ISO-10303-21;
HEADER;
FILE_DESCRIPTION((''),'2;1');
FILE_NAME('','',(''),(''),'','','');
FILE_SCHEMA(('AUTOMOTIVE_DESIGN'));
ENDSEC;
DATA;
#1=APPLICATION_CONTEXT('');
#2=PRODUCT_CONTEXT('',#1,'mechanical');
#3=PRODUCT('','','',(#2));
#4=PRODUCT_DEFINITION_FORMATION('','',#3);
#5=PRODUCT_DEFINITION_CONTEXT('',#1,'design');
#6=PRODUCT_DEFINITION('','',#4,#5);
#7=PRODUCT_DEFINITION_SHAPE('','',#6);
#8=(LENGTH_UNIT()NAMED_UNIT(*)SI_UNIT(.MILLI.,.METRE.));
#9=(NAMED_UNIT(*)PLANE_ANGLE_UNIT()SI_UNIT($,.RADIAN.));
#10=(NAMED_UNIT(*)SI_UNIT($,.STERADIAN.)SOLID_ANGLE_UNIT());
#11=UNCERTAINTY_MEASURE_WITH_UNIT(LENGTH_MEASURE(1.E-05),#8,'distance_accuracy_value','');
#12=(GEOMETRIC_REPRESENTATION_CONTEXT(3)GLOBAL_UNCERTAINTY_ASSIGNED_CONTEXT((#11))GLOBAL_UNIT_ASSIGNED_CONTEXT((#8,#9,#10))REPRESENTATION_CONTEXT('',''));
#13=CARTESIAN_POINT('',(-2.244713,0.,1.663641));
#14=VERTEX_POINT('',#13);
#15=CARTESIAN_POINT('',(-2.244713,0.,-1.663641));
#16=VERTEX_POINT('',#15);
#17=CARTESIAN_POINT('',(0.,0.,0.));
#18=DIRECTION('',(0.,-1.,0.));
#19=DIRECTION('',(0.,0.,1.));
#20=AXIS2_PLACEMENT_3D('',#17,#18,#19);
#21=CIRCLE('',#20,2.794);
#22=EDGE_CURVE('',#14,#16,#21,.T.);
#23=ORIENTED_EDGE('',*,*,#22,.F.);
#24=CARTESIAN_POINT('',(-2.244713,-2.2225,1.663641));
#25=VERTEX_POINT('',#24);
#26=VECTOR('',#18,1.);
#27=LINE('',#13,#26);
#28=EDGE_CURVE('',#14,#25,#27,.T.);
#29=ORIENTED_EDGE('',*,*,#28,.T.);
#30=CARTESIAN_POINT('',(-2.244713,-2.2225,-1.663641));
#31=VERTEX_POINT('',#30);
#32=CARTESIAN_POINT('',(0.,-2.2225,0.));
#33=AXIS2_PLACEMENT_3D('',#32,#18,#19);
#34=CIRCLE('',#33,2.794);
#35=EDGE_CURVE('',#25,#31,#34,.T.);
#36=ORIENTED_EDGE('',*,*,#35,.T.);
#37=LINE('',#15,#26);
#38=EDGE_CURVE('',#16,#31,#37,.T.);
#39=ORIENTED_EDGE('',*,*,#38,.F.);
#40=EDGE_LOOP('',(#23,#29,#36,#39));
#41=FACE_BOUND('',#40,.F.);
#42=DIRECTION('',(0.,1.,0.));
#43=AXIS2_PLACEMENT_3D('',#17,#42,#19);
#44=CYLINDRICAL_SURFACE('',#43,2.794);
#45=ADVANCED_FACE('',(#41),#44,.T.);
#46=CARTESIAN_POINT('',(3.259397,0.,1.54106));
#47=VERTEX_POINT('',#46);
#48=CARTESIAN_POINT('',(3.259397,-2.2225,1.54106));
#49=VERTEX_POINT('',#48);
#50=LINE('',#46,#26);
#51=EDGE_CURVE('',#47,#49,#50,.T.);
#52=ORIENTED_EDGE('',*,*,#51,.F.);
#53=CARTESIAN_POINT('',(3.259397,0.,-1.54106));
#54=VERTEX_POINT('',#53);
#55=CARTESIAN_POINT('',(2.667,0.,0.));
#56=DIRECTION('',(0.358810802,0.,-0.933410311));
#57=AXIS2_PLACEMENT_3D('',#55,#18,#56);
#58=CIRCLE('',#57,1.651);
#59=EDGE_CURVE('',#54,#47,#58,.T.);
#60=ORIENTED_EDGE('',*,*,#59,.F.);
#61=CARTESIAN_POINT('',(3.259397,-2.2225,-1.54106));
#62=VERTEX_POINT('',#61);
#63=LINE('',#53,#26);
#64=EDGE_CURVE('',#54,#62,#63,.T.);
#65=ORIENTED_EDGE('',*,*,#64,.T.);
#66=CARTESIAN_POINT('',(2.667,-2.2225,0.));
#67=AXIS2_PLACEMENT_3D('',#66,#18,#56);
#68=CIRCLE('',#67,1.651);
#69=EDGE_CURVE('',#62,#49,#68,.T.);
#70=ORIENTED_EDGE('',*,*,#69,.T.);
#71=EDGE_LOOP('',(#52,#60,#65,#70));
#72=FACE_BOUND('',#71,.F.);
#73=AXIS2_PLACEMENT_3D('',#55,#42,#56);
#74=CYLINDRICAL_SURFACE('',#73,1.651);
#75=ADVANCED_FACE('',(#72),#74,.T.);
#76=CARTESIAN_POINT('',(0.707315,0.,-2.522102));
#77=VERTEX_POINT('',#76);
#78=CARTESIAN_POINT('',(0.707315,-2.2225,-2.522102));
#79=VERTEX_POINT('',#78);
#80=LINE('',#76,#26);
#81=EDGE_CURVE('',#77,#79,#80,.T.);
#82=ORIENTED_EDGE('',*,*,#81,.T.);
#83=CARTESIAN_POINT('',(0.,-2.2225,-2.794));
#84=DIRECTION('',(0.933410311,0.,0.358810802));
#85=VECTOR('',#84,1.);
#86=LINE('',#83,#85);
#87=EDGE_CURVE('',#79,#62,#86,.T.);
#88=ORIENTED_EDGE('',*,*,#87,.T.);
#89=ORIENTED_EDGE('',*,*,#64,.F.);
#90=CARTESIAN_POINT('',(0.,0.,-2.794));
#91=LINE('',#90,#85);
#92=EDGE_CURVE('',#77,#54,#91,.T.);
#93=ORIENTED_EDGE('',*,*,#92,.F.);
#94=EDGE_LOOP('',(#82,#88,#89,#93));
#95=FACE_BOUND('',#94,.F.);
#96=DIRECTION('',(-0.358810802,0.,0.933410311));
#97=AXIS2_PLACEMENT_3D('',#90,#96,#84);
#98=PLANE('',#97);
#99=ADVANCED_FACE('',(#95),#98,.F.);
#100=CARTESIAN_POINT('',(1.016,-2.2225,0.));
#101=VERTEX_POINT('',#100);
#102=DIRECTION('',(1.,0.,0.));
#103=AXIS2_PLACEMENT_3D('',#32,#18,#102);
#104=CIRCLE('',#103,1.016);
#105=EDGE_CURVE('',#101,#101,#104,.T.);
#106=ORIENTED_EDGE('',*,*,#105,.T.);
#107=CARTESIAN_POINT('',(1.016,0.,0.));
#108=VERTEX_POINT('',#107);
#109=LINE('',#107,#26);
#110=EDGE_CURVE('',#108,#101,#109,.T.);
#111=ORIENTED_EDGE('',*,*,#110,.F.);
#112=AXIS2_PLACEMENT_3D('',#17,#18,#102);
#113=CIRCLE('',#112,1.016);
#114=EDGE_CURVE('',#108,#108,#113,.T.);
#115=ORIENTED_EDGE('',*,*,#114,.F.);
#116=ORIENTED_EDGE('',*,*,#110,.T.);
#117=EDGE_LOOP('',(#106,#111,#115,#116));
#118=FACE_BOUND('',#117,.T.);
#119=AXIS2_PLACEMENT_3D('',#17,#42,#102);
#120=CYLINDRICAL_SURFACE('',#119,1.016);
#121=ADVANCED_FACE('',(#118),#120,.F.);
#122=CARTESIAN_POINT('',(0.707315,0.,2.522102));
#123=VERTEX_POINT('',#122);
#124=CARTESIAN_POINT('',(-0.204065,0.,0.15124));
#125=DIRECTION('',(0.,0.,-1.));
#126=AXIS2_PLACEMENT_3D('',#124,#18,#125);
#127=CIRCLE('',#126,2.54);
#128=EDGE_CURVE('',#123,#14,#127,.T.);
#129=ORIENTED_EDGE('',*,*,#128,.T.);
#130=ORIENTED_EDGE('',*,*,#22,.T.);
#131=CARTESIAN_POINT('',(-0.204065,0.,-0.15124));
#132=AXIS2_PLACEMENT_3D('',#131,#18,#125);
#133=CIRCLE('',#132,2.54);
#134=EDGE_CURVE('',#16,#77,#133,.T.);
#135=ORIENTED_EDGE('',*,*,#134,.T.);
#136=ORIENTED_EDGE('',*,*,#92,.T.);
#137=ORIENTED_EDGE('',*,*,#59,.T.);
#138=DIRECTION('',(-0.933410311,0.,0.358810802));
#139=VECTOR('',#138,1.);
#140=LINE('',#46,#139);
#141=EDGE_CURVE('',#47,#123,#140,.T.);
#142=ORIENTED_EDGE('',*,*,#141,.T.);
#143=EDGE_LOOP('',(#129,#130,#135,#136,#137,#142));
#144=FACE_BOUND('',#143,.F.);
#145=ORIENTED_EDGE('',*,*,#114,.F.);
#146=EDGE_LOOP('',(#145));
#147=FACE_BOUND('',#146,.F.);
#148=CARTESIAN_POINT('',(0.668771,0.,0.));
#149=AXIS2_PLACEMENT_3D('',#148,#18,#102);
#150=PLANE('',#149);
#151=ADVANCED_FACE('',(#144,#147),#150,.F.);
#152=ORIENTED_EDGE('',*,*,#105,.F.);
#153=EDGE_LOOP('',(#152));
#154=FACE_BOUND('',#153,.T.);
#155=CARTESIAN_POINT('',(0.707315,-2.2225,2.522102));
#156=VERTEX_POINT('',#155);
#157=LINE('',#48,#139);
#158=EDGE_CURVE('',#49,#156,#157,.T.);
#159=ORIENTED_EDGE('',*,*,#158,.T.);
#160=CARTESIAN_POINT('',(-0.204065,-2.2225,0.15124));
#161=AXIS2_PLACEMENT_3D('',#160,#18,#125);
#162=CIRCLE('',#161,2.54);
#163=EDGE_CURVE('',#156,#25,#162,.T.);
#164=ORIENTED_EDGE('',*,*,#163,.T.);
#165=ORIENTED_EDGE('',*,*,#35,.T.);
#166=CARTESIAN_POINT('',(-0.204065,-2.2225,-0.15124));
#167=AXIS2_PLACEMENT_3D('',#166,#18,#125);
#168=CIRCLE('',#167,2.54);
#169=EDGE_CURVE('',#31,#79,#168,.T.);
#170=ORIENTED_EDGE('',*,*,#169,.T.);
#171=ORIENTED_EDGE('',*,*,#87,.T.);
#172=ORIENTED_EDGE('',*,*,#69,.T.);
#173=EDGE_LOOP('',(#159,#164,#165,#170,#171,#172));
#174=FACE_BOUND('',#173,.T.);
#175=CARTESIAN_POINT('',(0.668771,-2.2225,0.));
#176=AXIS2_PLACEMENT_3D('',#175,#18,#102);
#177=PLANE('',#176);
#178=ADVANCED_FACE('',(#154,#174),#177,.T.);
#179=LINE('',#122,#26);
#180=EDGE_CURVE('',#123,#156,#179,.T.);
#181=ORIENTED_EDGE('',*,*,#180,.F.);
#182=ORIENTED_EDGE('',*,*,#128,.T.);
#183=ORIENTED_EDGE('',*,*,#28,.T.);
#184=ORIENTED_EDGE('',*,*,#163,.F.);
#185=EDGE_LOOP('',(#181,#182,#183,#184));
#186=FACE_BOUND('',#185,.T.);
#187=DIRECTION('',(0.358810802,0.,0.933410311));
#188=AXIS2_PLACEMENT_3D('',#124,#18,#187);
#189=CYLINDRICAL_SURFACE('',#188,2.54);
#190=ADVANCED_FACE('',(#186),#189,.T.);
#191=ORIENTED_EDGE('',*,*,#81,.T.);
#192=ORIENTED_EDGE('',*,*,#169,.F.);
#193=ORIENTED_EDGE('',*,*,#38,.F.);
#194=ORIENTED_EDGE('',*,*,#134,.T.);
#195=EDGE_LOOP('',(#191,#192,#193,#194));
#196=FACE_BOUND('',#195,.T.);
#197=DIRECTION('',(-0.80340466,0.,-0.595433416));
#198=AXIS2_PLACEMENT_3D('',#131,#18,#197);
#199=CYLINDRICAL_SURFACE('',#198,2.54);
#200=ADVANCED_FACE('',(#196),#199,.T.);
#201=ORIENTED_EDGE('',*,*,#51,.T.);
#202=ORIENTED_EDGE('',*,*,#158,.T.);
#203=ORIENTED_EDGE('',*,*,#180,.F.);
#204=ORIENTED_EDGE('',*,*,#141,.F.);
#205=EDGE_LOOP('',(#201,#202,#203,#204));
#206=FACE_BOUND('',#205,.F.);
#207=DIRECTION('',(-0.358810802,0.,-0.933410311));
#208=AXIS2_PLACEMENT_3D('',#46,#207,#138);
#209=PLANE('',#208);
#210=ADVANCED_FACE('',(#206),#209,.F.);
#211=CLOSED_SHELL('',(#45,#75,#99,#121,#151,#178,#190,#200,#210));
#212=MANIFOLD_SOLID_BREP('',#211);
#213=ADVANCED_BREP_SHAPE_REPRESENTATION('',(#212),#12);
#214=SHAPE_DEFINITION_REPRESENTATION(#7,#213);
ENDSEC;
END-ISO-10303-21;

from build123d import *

# Parameters (mm, degrees)
F0_R     = 1.016
F1_DEPTH = 2.2225
F2_R     = 2.54
F3_R     = 2.54


# Not quite as in the source:
# - a length typed as a fraction of an inch, garbled in the dataset ("3 / 203.2 mm" for 3/8 in), is restored


with BuildPart() as f1:
    # F0 (on Front) → F1 (new body)
    with BuildSketch(Plane.XZ):
        with BuildLine():
            Line((3.2593966339, 1.5410604233), (0, 2.794))
            ThreePointArc((0, 2.794), (-2.794, 0), (0, -2.794))
            Line((0, -2.794), (3.2593966339, -1.5410604233))
            ThreePointArc((3.2593966339, -1.5410604233), (4.318, 0), (3.2593966339, 1.5410604233))
        make_face()
        Circle(F0_R, mode=Mode.SUBTRACT)
    extrude(amount=F1_DEPTH)

    # F2
    f2_edges = [f1.edges().sort_by_distance(p)[0] for p in [
        (0, -1.11125, 2.794),
    ]]
    fillet(f2_edges, radius=F2_R)

    # F3
    f3_edges = [f1.edges().sort_by_distance(p)[0] for p in [
        (0, -1.11125, -2.794),
    ]]
    fillet(f3_edges, radius=F3_R)


solid = f1.part
